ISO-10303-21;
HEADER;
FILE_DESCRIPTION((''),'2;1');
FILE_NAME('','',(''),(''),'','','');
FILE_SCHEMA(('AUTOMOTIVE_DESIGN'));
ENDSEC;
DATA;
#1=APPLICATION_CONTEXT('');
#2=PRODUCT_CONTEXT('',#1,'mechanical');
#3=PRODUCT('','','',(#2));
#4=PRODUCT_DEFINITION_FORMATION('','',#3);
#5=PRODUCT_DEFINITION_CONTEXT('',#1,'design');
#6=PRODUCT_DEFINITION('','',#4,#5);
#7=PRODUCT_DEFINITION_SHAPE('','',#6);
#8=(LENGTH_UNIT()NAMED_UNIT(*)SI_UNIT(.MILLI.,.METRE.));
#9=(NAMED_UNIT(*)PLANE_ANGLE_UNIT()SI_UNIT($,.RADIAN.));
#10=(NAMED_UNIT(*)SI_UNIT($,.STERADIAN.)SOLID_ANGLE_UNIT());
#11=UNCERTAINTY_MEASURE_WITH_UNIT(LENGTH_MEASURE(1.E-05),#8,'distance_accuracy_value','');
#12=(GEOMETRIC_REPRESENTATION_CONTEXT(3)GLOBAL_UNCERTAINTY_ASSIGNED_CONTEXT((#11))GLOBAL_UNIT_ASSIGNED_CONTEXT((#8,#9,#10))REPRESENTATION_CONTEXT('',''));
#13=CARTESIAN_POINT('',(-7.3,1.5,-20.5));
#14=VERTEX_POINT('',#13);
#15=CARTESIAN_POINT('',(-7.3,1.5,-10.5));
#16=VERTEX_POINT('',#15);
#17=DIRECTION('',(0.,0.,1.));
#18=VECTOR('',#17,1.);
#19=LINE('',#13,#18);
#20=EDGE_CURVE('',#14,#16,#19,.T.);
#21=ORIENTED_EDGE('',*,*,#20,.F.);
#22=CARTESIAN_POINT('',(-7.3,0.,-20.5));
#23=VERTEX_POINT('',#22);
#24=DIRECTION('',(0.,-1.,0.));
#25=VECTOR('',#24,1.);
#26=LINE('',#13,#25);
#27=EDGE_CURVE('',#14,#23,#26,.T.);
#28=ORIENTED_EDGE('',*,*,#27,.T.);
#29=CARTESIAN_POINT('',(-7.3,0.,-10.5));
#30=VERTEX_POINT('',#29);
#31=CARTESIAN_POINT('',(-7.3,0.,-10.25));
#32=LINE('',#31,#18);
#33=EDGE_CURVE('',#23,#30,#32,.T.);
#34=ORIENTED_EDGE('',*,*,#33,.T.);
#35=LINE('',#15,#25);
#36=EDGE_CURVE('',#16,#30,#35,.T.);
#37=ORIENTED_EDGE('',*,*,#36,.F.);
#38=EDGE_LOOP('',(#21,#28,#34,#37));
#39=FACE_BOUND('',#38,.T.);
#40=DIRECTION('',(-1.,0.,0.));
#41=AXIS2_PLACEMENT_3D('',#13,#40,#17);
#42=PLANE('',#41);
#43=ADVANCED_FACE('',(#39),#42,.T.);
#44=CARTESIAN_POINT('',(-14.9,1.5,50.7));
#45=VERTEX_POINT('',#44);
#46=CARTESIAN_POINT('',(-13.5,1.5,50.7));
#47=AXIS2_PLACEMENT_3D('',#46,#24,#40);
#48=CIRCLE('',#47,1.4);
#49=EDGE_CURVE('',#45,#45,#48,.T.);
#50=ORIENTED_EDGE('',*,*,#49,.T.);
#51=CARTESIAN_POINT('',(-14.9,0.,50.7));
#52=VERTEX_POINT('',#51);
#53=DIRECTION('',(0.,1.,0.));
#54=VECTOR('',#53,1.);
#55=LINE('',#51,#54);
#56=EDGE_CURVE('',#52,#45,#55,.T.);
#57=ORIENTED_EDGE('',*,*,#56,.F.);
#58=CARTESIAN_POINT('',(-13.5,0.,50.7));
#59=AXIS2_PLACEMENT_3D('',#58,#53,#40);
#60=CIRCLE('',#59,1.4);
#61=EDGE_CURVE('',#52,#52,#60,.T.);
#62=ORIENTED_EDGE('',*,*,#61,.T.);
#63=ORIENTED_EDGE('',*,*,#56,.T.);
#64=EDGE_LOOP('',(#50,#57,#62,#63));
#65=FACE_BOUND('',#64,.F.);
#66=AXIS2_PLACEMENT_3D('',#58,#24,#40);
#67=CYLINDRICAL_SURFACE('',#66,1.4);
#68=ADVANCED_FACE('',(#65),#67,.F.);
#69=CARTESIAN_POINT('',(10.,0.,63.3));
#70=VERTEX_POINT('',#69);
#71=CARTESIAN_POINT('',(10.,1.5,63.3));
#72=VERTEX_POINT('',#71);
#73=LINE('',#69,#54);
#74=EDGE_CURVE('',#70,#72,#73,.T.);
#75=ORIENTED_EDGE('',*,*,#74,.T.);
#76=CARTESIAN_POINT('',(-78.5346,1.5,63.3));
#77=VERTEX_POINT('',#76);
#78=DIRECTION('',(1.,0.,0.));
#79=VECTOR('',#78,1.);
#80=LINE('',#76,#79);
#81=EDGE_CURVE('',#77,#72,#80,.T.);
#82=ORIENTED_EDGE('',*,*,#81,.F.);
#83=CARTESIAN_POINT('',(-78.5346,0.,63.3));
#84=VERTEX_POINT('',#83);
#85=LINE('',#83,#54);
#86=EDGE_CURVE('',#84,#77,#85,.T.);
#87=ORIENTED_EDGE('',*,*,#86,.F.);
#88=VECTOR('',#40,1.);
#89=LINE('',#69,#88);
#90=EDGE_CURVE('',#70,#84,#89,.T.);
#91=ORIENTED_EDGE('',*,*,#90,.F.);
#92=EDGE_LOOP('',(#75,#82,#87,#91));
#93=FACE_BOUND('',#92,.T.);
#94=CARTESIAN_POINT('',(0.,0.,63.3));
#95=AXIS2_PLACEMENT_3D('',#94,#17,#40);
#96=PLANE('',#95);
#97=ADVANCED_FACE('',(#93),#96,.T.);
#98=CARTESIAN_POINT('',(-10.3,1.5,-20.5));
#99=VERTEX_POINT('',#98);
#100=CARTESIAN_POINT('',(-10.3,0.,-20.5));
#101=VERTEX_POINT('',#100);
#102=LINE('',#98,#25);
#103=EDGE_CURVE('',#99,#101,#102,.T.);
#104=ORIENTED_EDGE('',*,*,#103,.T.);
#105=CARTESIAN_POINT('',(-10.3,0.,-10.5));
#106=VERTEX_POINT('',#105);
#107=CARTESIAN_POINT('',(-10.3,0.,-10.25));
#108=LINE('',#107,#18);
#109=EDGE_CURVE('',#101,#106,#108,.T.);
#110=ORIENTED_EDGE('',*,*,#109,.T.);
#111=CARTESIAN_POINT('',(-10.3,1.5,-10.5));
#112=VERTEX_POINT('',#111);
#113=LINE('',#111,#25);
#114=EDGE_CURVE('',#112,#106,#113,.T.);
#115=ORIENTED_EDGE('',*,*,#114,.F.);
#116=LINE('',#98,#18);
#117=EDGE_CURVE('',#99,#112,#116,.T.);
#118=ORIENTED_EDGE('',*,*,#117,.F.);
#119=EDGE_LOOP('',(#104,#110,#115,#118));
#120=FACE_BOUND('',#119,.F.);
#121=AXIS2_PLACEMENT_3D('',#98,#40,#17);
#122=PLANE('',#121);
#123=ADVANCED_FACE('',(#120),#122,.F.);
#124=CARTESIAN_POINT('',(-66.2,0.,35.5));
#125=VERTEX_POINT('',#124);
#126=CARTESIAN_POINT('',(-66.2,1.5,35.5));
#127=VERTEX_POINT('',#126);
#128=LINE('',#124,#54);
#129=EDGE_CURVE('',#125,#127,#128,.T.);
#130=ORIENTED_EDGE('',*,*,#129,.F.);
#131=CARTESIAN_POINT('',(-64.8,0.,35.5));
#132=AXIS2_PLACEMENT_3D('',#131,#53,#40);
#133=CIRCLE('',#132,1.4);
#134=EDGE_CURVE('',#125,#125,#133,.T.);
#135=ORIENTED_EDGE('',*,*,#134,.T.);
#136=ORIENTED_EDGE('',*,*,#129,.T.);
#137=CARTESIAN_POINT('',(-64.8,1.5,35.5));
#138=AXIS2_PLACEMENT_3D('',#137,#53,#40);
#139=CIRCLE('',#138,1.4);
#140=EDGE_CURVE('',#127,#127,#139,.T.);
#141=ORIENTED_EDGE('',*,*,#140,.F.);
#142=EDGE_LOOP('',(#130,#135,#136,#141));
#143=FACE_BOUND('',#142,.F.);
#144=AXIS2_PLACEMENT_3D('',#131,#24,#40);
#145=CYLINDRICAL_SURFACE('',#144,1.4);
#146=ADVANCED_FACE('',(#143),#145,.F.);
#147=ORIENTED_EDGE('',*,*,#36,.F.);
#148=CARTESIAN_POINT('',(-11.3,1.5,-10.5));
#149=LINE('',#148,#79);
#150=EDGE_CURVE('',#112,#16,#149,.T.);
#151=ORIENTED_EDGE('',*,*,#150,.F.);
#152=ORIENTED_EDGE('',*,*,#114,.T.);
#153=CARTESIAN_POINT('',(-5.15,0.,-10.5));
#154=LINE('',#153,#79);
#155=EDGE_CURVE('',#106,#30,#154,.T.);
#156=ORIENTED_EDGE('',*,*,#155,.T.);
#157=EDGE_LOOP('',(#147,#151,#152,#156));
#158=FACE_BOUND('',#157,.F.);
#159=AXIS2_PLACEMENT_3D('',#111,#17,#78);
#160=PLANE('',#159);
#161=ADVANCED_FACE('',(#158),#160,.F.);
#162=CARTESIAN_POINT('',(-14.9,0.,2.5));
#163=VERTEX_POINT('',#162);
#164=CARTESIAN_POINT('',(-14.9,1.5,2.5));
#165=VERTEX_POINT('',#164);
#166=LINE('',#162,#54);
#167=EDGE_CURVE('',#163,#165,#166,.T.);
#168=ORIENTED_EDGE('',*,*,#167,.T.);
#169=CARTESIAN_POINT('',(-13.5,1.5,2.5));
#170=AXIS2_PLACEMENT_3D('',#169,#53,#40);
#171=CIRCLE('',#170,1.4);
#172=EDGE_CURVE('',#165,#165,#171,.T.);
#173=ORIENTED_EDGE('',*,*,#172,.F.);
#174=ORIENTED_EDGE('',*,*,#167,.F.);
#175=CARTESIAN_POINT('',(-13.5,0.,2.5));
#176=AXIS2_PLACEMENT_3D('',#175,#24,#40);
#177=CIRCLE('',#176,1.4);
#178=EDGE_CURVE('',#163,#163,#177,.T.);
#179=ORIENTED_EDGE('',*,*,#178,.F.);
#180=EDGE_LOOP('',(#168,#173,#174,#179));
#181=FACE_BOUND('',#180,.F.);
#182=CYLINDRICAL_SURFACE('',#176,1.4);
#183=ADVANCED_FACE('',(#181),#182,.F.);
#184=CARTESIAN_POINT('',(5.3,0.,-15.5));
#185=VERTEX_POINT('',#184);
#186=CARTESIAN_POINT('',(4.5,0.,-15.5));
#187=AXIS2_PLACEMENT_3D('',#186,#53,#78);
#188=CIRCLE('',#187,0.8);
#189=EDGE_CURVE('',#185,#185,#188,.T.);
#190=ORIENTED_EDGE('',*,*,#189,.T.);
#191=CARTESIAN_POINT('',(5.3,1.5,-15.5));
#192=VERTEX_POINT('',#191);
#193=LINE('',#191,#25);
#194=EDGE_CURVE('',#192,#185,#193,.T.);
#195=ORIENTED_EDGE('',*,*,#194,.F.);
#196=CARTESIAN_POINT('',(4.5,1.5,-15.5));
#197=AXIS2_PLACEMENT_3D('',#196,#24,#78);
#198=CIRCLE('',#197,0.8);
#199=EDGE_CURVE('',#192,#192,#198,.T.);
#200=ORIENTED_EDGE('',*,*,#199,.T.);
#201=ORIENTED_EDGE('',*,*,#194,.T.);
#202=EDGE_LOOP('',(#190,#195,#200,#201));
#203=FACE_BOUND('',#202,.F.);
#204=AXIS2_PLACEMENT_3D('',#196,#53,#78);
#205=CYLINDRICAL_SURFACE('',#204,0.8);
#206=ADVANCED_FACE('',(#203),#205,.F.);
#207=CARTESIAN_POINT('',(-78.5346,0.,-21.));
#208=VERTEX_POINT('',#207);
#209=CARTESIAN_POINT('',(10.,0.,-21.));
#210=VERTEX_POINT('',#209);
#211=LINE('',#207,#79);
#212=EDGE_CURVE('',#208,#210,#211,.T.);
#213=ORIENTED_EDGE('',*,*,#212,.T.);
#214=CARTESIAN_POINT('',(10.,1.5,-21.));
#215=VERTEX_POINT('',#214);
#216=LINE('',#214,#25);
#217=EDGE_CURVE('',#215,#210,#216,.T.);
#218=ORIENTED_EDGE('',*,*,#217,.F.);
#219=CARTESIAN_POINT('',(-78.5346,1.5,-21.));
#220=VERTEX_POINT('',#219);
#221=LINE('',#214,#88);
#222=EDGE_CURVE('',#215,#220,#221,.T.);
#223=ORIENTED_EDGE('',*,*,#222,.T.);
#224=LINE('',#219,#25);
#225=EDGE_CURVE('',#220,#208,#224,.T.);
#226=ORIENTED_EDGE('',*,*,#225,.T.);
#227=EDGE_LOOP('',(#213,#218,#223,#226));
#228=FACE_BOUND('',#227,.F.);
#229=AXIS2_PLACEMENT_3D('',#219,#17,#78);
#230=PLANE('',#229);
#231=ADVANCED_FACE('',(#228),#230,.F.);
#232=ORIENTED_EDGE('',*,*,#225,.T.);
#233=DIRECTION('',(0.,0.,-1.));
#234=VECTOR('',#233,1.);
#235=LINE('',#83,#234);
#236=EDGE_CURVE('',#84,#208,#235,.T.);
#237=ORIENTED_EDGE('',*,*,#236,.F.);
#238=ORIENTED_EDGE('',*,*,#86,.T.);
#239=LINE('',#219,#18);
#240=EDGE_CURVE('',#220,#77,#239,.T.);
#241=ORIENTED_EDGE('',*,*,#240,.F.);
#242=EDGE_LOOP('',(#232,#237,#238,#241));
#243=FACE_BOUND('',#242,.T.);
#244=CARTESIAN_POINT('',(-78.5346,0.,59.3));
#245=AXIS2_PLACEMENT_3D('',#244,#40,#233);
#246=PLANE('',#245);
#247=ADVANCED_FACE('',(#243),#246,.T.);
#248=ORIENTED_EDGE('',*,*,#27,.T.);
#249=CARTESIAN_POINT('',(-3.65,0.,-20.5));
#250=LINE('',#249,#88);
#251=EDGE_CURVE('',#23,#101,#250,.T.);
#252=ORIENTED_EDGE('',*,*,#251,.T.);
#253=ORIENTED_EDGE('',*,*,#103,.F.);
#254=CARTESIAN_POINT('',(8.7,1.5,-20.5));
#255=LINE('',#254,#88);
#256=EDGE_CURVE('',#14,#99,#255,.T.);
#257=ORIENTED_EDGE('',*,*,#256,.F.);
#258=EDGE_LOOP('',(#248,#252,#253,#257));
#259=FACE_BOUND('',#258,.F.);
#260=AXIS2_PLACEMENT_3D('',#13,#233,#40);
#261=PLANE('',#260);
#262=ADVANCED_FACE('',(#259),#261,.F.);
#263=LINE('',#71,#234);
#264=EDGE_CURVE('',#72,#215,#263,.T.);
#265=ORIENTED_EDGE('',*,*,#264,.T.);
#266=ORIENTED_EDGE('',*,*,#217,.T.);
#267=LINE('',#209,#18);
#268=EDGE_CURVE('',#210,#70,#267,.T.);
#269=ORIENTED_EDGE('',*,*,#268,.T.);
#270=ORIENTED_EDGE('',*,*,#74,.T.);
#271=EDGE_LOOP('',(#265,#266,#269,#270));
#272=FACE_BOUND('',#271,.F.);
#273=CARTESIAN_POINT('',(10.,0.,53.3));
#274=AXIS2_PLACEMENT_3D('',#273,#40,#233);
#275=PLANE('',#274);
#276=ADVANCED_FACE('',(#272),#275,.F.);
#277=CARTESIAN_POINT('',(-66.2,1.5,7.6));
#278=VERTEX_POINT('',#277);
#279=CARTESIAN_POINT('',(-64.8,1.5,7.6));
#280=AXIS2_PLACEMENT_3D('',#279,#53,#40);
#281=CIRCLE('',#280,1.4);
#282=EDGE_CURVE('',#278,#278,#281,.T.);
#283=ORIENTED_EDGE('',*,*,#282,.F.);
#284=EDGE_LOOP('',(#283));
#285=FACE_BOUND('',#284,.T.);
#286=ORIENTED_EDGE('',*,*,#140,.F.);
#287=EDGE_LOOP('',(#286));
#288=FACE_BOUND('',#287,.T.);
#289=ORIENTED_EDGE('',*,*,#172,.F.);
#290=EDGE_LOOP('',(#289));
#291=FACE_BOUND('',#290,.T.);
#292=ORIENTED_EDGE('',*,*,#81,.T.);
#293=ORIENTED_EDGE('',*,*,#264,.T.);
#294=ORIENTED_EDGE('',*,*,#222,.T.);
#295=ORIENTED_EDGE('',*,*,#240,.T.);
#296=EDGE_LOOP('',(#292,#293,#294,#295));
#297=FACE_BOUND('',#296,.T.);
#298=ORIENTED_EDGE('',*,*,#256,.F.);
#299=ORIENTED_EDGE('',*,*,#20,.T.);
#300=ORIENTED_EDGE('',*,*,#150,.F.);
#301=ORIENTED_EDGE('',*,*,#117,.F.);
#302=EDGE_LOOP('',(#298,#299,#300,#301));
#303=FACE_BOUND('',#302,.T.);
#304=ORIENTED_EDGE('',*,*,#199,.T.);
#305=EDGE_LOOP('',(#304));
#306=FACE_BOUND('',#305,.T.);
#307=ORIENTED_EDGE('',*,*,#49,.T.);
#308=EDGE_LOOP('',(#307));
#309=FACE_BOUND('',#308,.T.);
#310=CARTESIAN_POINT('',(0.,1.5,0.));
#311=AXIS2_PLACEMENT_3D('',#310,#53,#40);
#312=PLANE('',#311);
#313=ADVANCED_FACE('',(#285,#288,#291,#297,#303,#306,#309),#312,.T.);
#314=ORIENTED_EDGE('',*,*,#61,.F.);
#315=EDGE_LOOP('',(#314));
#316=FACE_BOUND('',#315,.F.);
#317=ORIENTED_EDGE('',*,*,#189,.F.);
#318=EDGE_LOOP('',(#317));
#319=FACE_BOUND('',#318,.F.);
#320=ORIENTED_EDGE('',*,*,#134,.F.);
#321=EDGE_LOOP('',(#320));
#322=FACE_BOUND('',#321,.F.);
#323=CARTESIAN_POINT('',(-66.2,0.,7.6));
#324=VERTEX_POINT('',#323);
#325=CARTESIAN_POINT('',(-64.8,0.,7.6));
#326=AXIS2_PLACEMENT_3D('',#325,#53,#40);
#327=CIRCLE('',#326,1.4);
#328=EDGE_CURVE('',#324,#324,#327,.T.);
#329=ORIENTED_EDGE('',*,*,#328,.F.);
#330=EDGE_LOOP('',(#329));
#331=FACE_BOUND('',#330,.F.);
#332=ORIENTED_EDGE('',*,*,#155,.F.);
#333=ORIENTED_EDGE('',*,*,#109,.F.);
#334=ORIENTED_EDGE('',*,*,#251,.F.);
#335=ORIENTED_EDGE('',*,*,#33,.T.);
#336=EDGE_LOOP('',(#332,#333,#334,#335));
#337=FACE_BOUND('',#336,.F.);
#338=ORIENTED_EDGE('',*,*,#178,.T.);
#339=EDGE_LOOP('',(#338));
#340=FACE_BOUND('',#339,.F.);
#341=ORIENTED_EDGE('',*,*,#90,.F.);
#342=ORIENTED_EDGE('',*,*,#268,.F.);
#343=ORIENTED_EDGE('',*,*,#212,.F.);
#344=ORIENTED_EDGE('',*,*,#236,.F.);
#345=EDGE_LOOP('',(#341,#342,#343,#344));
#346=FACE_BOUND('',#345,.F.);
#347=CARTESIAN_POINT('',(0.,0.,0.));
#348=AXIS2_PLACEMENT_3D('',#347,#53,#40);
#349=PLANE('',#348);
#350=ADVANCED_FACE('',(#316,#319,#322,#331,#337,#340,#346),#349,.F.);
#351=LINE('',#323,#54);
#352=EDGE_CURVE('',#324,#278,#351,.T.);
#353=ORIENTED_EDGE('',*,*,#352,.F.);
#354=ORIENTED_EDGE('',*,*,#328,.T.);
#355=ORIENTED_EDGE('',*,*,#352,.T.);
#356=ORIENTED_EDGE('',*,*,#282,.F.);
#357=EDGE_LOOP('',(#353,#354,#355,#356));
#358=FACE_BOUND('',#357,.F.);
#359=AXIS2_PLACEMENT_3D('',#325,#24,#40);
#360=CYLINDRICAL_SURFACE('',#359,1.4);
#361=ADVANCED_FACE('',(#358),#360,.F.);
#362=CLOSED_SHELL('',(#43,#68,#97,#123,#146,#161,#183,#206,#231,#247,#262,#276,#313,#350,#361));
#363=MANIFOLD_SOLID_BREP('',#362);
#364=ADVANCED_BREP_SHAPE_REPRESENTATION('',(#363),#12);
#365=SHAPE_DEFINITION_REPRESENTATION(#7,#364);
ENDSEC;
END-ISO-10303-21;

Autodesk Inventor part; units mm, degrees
ref_plane "YZ Plane" through (0, 0, 0) normal (1, 0, 0) x (0, 1, 0)
ref_plane "XZ Plane" through (0, 0, 0) normal (0, 1, 0) x (-1, 0, 0)
ref_plane "XY Plane" through (0, 0, 0) normal (0, 0, 1) x (1, 0, 0)
sketch "Sketch1" plane through (0, 0, 0) normal (0, 1, 0) x (-1, 0, 0)
  line L0 (0, 0) -> (0, 53.3)
  line L1 (0, 53.3) -> (68.5346, 53.3)
  line L2 (68.5346, 53.3) -> (68.5346, 0)
  line L3 (68.5346, 0) -> (0, 0)
  line L4 (68.5346, 0) -> (68.5346, 2.5)
  line L5 (68.5346, 2.5) -> (68.5346, 7.6)
  line L6 (68.5346, 7.6) -> (68.5346, 35.5)
  line L7 (0, 53.3) -> (14, 53.3)
  line L8 (68.5346, 35.5) -> (68.5346, 50.7)
  circle A0 centre (13.5, 50.7) radius 1.4
  circle A1 centre (13.5, 2.5) radius 1.4
  circle A2 centre (64.8, 35.5) radius 1.4
  circle A3 centre (64.8, 7.6) radius 1.4
  line L9 (0, 63.3) -> (78.5346, 63.3)
  line L10 (78.5346, 63.3) -> (78.5346, 0)
  line L11 (-10, 53.3) -> (-10, -10)
  line L12 (-10, -10) -> (68.5346, -10)
  line L13 (-10, -10) -> (78.5346, -10)
  line L14 (78.5346, -10) -> (78.5346, 63.3)
  line L15 (78.5346, 63.3) -> (-10, 63.3)
  line L16 (-10, 63.3) -> (-10, -10)
  line L17 (74.5346, 63.3) -> (74.5346, -6)
  line L18 (74.5346, -6) -> (-10, -6)
  line L19 (78.5346, 59.3) -> (-6, 59.3)
  line L20 (-6, 59.3) -> (-6, -10)
  line L21 (14.5, 50.7) -> (14.5, 2.5)
  dimension "d0" = 53.3
  dimension "d1" = 68.5346
  dimension "d2" = 2.8
  dimension "d3" = 2.8
  dimension "d4" = 2.8
  dimension "d5" = 2.8
  dimension "d6" = 10
  dimension "d7" = 10
  dimension "d8" = 4
  dimension "d9" = 4
  dimension "d10" = 1
  dimension "d11" = 1
extrude "Extrusion1" add sketch "Sketch1" along normal blind 1.5 contours L0 L1 L2 L3 | L9 L17 L19 L20 L18 L11 L16 L15 | L9 L10 L19 L17 | L19 L10 L14 L13 L12 L20 L18 L17 | L17 L18 L20 L19 | L18 L20 L12 L11
sketch "Sketch3" plane through (0, 1.5, 0) normal (0, 1, 0) x (1, 0, 0)
  line L0 (10, -63.3) -> (10, 10) projected
  line L1 (10, 10) -> (-78.5346, 10)
  line L2 (-78.5346, 10) -> (-78.5346, 21)
  line L3 (-78.5346, 21) -> (10, 21)
  line L4 (10, 21) -> (10, 10)
  line L5 (10, 21) -> (4.5, 21)
  line L6 (4.5, 21) -> (4.5, 15.5)
  line L7 (4.5, 15.5) -> (10, 15.5)
  line L8 (10, 15.5) -> (10, 21)
  circle A0 centre (4.5, 15.5) radius 0.8
  point P0 (0, 0)
  dimension "d14" = 11
  dimension "d15" = 5.5
  dimension "d16" = 5.5
  dimension "d17" = 1.6
extrude "Extrusion2" add sketch "Sketch3" against normal blind 1.5 contours L1 L2 L3 L6 A0 L7 L4 | L7 A0 L6 L3 L4
sketch "Sketch4" plane through (0, 1.5, 0) normal (0, 1, 0) x (1, 0, 0)
  circle A0 centre (4.5, 15.5) radius 0.8 projected
  line L0 (8.7, 15.5) -> (8.7, 20.5)
  line L1 (8.7, 20.5) -> (-11.3, 20.5)
  line L2 (-11.3, 20.5) -> (-11.3, 10.5)
  line L3 (-11.3, 10.5) -> (8.7, 10.5)
  line L4 (8.7, 10.5) -> (8.7, 15.5)
  line L5 (-11.3, 10.5) -> (-11.3, 20.5)
  line L6 (-10.3, 20.5) -> (-10.3, 10.5)
  line L7 (-6.3, 20.5) -> (-6.3, 10.5)
  line L8 (-7.3, 20.5) -> (-7.3, 10.5)
  point P0 (0, 0)
  dimension "d21" = 5
  dimension "d22" = 20
  dimension "d23" = 10
  dimension "d24" = 1
  dimension "d25" = 4
  dimension "d26" = 1
extrude "Extrusion3" cut sketch "Sketch4" against normal blind 15.4 contours L8 L3 L6 L1
properties part number "FitmentCard"
